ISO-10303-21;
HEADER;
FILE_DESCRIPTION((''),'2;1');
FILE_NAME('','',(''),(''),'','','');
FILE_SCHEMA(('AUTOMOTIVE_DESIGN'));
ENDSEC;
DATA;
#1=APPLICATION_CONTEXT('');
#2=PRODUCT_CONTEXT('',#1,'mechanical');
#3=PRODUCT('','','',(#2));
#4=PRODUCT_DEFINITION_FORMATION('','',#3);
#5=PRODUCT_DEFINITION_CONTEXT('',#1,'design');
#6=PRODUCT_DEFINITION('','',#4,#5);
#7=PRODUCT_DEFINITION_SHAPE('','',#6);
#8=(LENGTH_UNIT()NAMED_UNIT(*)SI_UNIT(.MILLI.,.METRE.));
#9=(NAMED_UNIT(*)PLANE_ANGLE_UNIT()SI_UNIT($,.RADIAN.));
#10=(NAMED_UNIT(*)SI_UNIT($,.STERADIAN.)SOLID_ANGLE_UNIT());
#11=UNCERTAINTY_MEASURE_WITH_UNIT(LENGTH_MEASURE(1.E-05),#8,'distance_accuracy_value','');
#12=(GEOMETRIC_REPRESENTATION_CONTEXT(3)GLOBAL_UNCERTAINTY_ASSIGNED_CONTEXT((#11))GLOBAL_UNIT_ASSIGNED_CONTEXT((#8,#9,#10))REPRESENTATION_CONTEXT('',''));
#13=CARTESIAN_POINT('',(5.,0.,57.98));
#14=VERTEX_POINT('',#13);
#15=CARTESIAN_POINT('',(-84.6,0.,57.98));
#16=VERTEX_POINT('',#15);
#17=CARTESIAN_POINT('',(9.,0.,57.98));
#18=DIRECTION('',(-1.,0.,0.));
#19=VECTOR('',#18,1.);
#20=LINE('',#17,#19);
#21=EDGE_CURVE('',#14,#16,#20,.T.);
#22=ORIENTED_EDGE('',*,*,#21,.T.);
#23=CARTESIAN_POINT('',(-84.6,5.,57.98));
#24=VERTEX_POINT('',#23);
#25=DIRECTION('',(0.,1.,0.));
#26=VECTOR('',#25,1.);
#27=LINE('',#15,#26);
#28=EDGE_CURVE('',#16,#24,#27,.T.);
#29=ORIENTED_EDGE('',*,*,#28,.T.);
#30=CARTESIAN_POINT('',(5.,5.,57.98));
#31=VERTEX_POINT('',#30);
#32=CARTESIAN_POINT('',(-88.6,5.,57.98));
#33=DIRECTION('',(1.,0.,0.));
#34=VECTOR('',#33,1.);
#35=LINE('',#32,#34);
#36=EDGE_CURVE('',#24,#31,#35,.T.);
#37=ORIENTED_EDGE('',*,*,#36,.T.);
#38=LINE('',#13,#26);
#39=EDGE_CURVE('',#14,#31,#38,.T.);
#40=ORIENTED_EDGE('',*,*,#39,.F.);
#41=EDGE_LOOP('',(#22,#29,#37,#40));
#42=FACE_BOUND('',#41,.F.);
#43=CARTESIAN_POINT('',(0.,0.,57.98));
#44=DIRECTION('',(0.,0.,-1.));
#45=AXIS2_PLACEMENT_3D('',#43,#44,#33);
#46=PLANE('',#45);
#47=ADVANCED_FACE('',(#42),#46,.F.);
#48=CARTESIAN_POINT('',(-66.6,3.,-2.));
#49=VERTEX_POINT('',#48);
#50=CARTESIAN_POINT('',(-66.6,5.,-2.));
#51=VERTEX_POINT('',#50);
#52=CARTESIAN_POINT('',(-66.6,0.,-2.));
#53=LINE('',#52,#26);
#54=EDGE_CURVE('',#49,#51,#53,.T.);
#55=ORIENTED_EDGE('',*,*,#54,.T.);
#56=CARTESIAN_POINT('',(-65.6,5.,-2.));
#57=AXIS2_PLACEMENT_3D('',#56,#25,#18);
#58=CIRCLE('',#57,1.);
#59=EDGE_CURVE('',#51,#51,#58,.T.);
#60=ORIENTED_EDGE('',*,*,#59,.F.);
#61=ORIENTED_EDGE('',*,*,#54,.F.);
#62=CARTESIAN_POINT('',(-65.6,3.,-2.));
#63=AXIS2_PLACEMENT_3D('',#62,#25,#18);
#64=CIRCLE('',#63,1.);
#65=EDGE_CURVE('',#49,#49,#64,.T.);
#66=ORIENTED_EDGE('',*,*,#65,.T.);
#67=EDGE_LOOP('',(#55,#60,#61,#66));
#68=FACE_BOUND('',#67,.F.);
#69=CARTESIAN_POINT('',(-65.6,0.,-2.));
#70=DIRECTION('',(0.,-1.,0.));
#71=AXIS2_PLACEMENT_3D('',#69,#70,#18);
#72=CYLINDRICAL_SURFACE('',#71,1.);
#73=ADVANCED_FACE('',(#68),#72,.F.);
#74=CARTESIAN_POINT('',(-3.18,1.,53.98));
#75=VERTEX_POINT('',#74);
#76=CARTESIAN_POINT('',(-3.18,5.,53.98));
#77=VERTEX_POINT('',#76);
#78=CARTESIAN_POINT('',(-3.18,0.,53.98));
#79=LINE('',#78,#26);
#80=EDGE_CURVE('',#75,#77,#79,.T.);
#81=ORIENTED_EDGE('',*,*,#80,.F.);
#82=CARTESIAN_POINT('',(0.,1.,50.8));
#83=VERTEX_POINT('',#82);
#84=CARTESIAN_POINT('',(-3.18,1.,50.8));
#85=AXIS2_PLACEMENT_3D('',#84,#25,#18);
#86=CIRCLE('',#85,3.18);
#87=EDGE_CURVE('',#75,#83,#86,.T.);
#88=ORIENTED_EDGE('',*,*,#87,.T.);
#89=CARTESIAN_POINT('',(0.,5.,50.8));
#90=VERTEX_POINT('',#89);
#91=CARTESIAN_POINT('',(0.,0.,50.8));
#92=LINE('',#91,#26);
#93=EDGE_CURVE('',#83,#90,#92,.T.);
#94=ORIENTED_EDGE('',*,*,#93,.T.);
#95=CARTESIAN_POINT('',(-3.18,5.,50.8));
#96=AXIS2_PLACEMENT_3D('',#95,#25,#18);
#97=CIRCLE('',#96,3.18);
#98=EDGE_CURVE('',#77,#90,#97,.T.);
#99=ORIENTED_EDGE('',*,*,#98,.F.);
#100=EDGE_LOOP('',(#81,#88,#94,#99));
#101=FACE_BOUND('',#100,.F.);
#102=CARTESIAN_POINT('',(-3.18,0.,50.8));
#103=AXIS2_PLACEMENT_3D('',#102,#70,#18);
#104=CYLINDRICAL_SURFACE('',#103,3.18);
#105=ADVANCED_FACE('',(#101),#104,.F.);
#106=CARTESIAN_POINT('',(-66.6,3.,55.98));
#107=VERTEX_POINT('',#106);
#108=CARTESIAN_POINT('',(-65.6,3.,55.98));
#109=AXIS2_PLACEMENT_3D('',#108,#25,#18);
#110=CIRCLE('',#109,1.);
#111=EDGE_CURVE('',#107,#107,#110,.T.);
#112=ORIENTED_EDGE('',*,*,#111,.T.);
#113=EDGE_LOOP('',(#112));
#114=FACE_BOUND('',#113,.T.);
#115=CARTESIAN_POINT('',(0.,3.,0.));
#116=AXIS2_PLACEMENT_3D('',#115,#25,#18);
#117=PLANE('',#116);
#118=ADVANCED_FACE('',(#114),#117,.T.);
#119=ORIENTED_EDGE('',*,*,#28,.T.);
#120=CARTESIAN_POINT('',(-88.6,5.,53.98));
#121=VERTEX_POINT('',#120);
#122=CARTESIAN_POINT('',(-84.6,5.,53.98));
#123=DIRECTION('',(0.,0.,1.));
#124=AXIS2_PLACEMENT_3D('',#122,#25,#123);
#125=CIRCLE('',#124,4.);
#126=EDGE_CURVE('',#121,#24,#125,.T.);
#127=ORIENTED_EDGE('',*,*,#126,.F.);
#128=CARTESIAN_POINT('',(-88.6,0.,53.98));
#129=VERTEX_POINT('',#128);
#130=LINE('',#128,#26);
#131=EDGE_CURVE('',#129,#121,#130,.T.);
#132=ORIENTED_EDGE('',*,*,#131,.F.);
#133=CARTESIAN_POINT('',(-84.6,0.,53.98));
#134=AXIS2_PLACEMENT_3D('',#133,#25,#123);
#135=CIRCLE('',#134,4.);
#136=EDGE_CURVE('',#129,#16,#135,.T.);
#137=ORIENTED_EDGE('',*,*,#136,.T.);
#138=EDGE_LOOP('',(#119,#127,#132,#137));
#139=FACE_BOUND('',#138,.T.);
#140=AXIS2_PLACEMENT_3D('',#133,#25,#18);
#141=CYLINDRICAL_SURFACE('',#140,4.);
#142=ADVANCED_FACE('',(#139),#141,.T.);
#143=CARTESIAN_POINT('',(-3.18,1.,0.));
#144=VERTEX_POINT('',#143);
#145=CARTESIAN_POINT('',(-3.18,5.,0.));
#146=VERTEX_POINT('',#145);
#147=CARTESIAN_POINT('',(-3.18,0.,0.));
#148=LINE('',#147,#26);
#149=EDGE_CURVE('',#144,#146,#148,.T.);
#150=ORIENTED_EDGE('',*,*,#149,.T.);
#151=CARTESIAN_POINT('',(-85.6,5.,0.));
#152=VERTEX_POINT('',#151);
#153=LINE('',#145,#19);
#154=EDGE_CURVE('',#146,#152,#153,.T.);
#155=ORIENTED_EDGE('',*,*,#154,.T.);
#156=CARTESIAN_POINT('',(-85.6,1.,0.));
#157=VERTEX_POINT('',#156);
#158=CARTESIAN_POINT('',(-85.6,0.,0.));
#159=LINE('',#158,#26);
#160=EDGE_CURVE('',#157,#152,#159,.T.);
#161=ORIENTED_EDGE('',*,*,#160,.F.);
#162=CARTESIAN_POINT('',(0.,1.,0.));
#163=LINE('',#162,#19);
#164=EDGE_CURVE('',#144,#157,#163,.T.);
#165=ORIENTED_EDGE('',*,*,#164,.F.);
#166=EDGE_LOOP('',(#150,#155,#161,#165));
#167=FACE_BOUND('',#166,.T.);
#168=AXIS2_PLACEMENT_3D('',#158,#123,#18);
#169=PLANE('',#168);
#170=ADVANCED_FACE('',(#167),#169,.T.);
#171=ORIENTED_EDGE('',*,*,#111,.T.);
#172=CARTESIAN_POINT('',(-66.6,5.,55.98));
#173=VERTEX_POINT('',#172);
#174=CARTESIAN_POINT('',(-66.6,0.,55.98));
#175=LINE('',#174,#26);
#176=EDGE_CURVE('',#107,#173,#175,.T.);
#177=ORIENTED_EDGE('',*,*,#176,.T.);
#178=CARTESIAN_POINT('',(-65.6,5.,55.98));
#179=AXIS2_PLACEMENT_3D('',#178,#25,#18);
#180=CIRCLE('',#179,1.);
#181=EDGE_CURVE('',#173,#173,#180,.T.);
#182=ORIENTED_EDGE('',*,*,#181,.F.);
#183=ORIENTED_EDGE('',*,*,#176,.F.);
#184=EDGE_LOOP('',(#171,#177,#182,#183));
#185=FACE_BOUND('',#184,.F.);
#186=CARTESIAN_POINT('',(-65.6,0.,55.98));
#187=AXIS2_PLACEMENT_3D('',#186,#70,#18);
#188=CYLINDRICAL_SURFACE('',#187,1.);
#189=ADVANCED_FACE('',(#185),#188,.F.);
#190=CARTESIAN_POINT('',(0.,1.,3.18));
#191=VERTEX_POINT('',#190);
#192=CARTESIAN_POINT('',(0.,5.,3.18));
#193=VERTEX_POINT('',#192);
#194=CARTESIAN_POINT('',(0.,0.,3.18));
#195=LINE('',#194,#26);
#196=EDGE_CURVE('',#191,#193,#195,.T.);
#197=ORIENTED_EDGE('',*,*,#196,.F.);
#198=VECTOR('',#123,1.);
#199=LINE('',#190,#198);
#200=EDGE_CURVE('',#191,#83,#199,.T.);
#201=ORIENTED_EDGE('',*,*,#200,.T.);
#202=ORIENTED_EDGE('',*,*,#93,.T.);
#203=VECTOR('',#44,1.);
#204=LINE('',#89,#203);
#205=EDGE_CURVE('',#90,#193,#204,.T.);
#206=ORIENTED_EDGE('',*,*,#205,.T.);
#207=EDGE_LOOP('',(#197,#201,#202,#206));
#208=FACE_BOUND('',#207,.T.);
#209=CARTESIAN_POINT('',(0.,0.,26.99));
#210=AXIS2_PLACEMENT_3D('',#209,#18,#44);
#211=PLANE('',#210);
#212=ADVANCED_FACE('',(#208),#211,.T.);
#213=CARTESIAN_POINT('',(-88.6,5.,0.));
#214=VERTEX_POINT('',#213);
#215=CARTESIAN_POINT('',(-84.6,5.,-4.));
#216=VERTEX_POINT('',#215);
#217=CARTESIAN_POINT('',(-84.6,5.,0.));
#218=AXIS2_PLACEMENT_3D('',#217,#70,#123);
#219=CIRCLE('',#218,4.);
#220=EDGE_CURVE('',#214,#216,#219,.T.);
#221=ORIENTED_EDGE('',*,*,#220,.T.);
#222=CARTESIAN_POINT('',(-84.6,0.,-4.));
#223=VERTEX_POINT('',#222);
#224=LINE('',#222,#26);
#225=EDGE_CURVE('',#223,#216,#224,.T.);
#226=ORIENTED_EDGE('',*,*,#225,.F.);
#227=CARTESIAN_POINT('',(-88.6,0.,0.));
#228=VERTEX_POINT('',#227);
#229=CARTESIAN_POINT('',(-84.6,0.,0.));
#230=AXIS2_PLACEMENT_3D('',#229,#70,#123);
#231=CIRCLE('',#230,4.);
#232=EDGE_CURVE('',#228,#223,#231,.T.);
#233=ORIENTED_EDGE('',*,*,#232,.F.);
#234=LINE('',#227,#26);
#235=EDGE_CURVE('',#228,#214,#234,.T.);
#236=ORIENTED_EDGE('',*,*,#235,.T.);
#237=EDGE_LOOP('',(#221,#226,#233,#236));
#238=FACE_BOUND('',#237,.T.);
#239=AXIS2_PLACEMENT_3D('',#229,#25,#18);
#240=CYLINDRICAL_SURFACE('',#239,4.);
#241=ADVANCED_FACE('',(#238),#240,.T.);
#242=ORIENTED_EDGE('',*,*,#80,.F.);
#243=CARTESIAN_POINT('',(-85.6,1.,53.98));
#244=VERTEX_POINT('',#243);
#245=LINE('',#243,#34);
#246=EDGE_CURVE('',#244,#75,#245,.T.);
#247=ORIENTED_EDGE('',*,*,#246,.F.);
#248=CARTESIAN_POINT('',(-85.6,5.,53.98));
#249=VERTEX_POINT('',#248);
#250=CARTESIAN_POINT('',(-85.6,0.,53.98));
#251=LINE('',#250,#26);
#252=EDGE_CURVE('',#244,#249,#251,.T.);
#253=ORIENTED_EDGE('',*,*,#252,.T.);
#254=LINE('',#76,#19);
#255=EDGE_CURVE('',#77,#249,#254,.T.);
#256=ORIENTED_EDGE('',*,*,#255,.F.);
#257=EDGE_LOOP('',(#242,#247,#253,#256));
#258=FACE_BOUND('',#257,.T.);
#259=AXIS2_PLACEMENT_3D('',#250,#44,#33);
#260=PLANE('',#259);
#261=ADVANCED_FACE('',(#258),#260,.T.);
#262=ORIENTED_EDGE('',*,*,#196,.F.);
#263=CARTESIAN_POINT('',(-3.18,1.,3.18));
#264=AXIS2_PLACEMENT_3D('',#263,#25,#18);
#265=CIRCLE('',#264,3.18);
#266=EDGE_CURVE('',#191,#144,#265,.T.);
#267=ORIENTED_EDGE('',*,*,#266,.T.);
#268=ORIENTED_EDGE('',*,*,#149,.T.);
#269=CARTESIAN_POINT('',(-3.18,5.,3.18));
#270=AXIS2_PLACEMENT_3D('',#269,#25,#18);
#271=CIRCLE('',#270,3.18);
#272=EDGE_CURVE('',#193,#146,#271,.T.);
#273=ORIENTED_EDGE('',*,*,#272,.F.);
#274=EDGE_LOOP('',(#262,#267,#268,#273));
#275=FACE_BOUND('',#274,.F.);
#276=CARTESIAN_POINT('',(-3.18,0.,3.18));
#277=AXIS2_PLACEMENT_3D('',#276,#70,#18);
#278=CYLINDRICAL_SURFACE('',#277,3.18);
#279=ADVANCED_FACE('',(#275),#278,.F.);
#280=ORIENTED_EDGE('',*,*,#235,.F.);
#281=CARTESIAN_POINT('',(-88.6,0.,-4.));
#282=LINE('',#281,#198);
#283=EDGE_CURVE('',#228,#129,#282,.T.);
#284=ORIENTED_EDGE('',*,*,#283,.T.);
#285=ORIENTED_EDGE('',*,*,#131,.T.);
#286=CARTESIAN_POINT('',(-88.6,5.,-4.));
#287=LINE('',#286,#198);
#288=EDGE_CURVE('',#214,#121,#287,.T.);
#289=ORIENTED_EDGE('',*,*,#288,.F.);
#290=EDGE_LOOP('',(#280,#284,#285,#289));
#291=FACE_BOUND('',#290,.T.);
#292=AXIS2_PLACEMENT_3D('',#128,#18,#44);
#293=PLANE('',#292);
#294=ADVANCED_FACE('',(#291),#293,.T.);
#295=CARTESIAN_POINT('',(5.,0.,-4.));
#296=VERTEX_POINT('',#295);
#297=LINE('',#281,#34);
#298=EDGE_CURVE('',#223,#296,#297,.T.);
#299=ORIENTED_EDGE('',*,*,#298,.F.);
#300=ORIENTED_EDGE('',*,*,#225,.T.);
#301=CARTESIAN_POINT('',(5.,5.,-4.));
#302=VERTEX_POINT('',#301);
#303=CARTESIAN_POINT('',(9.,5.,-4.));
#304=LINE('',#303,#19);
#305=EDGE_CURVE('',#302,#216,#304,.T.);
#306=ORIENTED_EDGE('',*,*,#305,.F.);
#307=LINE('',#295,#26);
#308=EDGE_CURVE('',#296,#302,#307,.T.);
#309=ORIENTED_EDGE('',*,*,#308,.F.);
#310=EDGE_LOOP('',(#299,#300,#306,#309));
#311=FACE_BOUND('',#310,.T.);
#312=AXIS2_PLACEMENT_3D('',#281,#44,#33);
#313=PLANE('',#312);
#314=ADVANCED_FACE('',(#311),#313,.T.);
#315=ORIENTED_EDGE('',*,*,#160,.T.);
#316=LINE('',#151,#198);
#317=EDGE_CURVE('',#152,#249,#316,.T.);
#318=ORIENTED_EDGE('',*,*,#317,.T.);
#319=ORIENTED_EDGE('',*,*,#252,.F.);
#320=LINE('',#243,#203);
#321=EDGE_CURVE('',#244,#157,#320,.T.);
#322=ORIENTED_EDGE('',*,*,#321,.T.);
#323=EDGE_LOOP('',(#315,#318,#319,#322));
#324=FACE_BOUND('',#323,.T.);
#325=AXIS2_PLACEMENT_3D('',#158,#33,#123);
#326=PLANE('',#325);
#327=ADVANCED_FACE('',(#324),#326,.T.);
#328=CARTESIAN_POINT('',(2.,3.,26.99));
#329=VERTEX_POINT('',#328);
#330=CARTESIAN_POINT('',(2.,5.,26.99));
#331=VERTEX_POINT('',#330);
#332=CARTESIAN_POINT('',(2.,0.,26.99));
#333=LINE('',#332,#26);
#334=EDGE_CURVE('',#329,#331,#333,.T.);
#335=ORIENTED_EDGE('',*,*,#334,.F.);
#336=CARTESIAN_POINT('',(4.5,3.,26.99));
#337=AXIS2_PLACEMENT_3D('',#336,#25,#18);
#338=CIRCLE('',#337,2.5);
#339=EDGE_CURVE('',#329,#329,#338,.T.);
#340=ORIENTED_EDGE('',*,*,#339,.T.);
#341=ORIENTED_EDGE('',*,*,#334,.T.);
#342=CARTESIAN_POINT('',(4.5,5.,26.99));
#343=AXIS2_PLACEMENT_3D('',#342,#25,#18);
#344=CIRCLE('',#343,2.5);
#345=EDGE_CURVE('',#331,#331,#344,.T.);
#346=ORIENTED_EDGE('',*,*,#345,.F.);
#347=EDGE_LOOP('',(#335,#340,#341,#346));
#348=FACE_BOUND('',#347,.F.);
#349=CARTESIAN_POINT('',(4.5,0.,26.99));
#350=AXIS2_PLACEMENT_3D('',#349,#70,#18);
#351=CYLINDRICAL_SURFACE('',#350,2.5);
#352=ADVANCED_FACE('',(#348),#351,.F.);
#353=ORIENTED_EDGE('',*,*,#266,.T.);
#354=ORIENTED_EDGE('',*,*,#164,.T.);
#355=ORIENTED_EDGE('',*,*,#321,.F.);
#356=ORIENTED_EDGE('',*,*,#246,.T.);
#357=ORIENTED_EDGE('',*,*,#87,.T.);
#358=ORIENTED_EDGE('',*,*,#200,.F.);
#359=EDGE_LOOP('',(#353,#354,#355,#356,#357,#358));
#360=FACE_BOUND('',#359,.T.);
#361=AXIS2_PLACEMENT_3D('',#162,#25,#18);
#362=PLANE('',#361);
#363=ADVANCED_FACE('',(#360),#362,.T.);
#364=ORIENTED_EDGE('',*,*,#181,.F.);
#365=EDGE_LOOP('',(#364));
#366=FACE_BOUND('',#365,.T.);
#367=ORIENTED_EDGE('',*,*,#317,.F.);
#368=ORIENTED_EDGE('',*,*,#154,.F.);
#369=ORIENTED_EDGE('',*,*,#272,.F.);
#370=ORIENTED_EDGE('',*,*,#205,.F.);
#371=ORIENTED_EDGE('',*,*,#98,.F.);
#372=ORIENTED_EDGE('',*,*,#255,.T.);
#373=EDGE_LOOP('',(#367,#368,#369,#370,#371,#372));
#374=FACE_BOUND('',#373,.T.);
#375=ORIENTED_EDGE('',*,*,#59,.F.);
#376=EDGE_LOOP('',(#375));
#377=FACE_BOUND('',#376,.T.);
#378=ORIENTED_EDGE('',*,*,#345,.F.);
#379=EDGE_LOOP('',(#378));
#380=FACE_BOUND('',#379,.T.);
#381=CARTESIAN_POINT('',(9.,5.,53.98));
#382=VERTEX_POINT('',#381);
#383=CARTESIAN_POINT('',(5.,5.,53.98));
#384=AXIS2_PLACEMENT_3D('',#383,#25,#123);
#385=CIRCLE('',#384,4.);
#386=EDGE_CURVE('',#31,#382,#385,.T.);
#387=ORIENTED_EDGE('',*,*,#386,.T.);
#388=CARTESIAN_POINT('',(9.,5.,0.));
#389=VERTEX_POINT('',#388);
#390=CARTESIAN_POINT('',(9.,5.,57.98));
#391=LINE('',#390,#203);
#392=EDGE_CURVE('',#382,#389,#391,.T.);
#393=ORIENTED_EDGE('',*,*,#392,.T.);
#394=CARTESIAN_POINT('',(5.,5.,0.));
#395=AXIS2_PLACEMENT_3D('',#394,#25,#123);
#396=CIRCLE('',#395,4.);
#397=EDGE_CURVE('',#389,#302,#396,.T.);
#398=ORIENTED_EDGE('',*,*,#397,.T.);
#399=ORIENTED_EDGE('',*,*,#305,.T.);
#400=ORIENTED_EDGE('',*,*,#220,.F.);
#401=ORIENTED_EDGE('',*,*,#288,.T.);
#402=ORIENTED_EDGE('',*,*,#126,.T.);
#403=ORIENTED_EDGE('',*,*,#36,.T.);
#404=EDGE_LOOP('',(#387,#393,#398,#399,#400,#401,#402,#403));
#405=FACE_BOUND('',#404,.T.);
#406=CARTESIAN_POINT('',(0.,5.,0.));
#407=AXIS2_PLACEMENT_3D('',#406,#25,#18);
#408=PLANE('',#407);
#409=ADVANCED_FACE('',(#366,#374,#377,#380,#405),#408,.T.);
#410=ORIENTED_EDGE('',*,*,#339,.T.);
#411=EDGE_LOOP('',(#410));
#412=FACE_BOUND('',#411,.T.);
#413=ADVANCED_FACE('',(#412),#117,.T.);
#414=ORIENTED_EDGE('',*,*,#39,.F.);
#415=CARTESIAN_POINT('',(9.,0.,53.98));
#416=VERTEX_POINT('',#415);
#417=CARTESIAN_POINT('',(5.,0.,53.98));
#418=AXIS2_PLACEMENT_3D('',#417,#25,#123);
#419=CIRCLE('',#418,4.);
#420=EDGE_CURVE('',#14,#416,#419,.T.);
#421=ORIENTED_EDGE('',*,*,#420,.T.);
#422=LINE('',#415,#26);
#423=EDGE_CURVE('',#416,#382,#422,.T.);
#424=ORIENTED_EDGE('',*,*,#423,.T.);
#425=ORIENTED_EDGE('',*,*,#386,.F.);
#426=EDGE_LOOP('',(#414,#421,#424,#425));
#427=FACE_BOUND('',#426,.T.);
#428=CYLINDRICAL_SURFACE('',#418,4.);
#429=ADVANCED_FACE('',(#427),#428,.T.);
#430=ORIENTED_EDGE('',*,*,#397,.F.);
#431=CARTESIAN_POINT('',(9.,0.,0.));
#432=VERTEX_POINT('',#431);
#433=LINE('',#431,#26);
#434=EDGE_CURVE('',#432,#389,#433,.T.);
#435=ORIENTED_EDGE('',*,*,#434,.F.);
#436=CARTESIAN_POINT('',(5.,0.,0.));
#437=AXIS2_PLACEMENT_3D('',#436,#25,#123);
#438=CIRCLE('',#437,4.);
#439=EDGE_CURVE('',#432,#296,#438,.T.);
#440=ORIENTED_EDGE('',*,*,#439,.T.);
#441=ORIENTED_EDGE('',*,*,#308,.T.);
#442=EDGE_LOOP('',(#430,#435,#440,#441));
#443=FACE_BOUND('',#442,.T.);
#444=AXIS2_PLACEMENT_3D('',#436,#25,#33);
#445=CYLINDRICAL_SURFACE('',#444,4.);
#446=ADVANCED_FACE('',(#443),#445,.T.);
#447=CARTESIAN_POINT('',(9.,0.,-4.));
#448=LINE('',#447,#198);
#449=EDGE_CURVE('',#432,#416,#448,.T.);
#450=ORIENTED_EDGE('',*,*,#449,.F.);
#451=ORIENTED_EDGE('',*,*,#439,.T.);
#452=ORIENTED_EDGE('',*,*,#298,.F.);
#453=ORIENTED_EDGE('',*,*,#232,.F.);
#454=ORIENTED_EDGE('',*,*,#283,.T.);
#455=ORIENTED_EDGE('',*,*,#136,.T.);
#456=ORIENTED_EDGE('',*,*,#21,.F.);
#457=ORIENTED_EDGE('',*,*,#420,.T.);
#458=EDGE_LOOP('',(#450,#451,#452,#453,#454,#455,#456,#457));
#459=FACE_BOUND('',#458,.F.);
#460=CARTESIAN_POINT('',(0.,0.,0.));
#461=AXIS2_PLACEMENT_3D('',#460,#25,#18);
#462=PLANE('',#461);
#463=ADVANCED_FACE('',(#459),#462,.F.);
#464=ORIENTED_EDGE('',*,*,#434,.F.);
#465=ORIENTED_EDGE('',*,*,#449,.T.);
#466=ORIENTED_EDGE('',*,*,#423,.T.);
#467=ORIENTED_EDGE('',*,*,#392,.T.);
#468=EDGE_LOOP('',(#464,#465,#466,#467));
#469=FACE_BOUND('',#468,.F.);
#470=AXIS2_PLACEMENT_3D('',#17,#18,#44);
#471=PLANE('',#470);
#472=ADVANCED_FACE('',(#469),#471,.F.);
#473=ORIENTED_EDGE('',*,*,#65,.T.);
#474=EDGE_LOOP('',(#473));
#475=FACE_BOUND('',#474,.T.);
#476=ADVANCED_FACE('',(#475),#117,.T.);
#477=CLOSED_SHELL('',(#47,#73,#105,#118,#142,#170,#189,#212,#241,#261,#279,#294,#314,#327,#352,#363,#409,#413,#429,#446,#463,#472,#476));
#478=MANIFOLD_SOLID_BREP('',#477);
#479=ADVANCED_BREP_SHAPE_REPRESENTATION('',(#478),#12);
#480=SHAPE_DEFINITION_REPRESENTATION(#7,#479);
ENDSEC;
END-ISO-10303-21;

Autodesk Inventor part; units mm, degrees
ref_plane "YZ Plane" through (0, 0, 0) normal (1, 0, 0) x (0, 1, 0)
ref_plane "XZ Plane" through (0, 0, 0) normal (0, 1, 0) x (-1, 0, 0)
ref_plane "XY Plane" through (0, 0, 0) normal (0, 0, 1) x (1, 0, 0)
sketch "Sketch1" plane through (0, 0, 0) normal (0, 1, 0) x (-1, 0, 0)
  line L0 (0, 0) -> (85.6, 0)
  line L1 (85.6, 0) -> (85.6, 53.98)
  line L2 (85.6, 53.98) -> (0, 53.98)
  line L3 (0, 53.98) -> (0, 0)
  line L4 (0, 53.98) -> (0, 50.8)
  line L5 (0, 50.8) -> (3.18, 50.8)
  circle A0 centre (3.18, 50.8) radius 3.18
  line L6 (85.6, 53.98) -> (85.6, 57.98)
  line L7 (85.6, 57.98) -> (0, 57.98)
  line L8 (0, 57.98) -> (-9, 57.98)
  line L9 (-9, 57.98) -> (-9, 0)
  line L10 (-9, 0) -> (0, 0)
  line L11 (0, 26.99) -> (-4.5, 26.99)
  circle A1 centre (-4.5, 26.99) radius 2.5
  line L12 (85.6, 55.98) -> (65.6, 55.98)
  circle A2 centre (65.6, 55.98) radius 1
  line L13 (0, 26.99) -> (85.6, 26.99)
  line L14 (85.6, -4) -> (0, -4)
  line L15 (0, -4) -> (-9, -4)
  circle A3 centre (65.6, -2) radius 1
  line L16 (85.6, -4) -> (85.6, 0)
  line L17 (-9, -4) -> (-9, 0)
  line L18 (85.6, 57.98) -> (88.6, 57.98)
  line L19 (88.6, 57.98) -> (88.6, -4)
  line L20 (88.6, -4) -> (85.6, -4)
  line L21 (85.6, -4) -> (85.6, 57.98)
  line L22 (85.6, 53.98) -> (88.6, 53.98)
  line L23 (85.6, 0) -> (88.6, 0)
  circle A4 centre (3.18, 3.18) radius 3.18
  point P0 (3.18, 0)
  point P1 (0, 3.18)
  point P2 (3.18, 53.98)
  dimension "d0" = 85.6
  dimension "d1" = 53.98
  dimension "d2" = 3.18
  dimension "d3" = 3.18
  dimension "d4" = 4
  dimension "d5" = 9
  dimension "d6" = 5
  dimension "d7" = 20
  dimension "d8" = 2
  dimension "d9" = 3
extrude "Extrusion1" add sketch "Sketch1" along normal blind 5 contours L3 A4 L0 | L10 L9 L8 L7 L6 L2 L3 | L0 L16 L14 L15 L17 L10 | L3 L2 A0 | L6 L18 L19 L22
extrude "Extrusion2" add sketch "Sketch1" along normal blind 1 contours A4 L3 L13 L1 L0 | A4 | L3 A0 L2 L1 L13 | A0
extrude "Extrusion3" add sketch "Sketch1" along normal blind 5 contours L23 L19 L20 L16
extrude "Extrusion4" add sketch "Sketch1" along normal blind 5 contours L1 L22 L19 L23
fillet "Fillet2" radius 4 4 edges at (-88.6, 2.5, 57.98) (-88.6, 2.5, -4) (9, 2.5, -4) (9, 2.5, 57.98)
extrude "Extrusion5" add sketch "Sketch1" along normal blind 3 contours A1 | A2 | A3
properties part number "magnet card bottom"
